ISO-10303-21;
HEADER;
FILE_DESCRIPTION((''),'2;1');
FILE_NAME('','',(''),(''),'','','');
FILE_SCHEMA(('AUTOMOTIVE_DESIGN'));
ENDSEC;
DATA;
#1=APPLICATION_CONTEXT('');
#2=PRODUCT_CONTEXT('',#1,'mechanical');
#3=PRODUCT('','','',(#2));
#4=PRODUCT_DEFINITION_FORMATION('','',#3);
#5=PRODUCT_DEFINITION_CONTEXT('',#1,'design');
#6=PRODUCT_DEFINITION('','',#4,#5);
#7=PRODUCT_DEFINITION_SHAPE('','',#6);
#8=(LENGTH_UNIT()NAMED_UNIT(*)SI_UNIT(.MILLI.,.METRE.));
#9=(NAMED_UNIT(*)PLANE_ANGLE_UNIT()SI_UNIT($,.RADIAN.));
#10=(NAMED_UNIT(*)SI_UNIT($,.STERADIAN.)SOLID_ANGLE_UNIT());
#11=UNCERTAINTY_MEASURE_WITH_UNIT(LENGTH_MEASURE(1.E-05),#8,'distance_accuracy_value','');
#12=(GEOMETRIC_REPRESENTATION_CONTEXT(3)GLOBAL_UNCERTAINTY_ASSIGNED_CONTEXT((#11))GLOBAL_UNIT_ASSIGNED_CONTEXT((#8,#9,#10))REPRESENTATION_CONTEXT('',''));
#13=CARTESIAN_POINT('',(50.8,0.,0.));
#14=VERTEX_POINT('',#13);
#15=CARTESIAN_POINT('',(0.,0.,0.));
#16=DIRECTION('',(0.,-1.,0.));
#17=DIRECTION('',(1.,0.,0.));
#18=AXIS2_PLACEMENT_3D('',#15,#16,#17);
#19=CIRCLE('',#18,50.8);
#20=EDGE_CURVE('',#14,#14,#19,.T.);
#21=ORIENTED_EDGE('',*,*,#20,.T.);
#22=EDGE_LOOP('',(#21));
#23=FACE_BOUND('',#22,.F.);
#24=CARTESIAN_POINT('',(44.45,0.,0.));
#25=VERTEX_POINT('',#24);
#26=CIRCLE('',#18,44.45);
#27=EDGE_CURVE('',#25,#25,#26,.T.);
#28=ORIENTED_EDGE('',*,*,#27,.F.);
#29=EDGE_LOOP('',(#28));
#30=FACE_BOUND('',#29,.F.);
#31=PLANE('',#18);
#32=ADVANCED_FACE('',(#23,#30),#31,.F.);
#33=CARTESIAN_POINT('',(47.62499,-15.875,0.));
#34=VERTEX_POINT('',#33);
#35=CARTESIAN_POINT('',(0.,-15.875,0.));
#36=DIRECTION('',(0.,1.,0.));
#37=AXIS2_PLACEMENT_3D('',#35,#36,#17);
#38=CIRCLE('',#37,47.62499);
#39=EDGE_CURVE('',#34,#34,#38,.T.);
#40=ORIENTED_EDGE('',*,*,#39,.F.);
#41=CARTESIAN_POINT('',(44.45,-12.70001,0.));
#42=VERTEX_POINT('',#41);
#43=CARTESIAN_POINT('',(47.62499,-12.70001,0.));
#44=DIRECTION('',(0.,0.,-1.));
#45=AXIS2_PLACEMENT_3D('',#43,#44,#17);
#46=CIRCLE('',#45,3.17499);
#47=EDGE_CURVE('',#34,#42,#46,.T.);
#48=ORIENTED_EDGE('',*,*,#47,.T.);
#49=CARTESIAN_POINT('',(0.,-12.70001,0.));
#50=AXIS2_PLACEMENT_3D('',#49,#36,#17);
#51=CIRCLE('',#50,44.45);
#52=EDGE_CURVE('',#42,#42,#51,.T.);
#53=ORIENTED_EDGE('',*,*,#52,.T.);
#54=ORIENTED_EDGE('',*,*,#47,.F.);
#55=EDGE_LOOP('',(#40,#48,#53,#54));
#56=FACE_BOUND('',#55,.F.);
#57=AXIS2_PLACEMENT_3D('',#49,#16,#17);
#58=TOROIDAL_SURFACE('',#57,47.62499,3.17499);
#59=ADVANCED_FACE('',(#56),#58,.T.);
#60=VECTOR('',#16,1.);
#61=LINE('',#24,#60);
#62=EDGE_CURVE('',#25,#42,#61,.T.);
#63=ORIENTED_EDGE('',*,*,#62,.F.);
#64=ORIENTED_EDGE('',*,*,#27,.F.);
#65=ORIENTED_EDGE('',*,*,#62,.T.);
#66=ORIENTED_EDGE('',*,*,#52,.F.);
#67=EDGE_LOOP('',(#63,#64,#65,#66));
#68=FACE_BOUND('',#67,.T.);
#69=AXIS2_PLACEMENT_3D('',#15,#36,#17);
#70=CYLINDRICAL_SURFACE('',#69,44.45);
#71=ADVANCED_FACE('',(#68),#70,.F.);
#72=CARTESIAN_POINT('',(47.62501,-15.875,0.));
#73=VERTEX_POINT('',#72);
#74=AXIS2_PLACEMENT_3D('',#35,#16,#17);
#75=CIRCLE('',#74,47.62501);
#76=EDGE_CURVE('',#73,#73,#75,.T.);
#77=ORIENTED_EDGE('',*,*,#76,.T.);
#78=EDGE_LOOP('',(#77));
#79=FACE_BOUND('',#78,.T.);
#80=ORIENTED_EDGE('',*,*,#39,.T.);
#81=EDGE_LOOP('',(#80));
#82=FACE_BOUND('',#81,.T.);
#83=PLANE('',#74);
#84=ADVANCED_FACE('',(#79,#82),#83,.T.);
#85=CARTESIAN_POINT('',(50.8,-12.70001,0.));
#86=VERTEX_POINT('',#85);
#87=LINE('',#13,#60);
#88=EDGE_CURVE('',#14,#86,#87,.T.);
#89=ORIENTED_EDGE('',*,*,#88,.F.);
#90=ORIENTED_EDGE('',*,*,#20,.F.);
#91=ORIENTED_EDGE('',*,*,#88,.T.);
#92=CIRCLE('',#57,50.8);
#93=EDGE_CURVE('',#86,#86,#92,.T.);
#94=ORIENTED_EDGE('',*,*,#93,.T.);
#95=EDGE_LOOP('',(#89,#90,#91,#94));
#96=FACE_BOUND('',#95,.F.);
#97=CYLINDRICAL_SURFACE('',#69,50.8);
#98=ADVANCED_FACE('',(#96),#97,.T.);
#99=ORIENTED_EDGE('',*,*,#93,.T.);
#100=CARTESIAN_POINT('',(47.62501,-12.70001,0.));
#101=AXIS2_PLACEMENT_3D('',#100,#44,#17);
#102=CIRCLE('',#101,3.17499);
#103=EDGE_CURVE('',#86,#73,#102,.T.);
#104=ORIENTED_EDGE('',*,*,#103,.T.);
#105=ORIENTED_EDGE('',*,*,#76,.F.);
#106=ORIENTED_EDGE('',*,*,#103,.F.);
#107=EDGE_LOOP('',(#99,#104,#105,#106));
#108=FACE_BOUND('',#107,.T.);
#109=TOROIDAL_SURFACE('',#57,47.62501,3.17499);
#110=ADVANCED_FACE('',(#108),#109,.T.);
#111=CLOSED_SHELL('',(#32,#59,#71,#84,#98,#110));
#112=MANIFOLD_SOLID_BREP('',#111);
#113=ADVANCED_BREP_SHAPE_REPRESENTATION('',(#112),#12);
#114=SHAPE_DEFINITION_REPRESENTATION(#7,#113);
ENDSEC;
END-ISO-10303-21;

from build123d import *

# Parameters (mm, degrees)
F0_R     = 50.8
F1_DEPTH = 15.875
F2_R     = 44.45
F3_DEPTH = 15.876
F4_R     = 3.17499


# Not quite as in the source:
# - a fillet or chamfer is up to 0.001 mm smaller than in the source, because OpenCascade refuses the exact size


with BuildPart() as f1:
    # F0 (on Front) → F1 (new body)
    with BuildSketch(Plane.XZ):
        Circle(F0_R)
    extrude(amount=F1_DEPTH)

    # F2 (on Front) → F3 (cut, through all)
    with BuildSketch(Plane.XZ):
        Circle(F2_R)
    extrude(amount=F3_DEPTH, mode=Mode.SUBTRACT)

    # F4 (radius 3.175 in the source; OpenCascade refuses exactly that, so slightly less here)
    f4_edges = [f1.edges().sort_by_distance(p)[0] for p in [
        (-50.8, -15.875, 0),
        (-44.45, -15.875, 0),
    ]]
    fillet(f4_edges, radius=F4_R)


solid = f1.part
